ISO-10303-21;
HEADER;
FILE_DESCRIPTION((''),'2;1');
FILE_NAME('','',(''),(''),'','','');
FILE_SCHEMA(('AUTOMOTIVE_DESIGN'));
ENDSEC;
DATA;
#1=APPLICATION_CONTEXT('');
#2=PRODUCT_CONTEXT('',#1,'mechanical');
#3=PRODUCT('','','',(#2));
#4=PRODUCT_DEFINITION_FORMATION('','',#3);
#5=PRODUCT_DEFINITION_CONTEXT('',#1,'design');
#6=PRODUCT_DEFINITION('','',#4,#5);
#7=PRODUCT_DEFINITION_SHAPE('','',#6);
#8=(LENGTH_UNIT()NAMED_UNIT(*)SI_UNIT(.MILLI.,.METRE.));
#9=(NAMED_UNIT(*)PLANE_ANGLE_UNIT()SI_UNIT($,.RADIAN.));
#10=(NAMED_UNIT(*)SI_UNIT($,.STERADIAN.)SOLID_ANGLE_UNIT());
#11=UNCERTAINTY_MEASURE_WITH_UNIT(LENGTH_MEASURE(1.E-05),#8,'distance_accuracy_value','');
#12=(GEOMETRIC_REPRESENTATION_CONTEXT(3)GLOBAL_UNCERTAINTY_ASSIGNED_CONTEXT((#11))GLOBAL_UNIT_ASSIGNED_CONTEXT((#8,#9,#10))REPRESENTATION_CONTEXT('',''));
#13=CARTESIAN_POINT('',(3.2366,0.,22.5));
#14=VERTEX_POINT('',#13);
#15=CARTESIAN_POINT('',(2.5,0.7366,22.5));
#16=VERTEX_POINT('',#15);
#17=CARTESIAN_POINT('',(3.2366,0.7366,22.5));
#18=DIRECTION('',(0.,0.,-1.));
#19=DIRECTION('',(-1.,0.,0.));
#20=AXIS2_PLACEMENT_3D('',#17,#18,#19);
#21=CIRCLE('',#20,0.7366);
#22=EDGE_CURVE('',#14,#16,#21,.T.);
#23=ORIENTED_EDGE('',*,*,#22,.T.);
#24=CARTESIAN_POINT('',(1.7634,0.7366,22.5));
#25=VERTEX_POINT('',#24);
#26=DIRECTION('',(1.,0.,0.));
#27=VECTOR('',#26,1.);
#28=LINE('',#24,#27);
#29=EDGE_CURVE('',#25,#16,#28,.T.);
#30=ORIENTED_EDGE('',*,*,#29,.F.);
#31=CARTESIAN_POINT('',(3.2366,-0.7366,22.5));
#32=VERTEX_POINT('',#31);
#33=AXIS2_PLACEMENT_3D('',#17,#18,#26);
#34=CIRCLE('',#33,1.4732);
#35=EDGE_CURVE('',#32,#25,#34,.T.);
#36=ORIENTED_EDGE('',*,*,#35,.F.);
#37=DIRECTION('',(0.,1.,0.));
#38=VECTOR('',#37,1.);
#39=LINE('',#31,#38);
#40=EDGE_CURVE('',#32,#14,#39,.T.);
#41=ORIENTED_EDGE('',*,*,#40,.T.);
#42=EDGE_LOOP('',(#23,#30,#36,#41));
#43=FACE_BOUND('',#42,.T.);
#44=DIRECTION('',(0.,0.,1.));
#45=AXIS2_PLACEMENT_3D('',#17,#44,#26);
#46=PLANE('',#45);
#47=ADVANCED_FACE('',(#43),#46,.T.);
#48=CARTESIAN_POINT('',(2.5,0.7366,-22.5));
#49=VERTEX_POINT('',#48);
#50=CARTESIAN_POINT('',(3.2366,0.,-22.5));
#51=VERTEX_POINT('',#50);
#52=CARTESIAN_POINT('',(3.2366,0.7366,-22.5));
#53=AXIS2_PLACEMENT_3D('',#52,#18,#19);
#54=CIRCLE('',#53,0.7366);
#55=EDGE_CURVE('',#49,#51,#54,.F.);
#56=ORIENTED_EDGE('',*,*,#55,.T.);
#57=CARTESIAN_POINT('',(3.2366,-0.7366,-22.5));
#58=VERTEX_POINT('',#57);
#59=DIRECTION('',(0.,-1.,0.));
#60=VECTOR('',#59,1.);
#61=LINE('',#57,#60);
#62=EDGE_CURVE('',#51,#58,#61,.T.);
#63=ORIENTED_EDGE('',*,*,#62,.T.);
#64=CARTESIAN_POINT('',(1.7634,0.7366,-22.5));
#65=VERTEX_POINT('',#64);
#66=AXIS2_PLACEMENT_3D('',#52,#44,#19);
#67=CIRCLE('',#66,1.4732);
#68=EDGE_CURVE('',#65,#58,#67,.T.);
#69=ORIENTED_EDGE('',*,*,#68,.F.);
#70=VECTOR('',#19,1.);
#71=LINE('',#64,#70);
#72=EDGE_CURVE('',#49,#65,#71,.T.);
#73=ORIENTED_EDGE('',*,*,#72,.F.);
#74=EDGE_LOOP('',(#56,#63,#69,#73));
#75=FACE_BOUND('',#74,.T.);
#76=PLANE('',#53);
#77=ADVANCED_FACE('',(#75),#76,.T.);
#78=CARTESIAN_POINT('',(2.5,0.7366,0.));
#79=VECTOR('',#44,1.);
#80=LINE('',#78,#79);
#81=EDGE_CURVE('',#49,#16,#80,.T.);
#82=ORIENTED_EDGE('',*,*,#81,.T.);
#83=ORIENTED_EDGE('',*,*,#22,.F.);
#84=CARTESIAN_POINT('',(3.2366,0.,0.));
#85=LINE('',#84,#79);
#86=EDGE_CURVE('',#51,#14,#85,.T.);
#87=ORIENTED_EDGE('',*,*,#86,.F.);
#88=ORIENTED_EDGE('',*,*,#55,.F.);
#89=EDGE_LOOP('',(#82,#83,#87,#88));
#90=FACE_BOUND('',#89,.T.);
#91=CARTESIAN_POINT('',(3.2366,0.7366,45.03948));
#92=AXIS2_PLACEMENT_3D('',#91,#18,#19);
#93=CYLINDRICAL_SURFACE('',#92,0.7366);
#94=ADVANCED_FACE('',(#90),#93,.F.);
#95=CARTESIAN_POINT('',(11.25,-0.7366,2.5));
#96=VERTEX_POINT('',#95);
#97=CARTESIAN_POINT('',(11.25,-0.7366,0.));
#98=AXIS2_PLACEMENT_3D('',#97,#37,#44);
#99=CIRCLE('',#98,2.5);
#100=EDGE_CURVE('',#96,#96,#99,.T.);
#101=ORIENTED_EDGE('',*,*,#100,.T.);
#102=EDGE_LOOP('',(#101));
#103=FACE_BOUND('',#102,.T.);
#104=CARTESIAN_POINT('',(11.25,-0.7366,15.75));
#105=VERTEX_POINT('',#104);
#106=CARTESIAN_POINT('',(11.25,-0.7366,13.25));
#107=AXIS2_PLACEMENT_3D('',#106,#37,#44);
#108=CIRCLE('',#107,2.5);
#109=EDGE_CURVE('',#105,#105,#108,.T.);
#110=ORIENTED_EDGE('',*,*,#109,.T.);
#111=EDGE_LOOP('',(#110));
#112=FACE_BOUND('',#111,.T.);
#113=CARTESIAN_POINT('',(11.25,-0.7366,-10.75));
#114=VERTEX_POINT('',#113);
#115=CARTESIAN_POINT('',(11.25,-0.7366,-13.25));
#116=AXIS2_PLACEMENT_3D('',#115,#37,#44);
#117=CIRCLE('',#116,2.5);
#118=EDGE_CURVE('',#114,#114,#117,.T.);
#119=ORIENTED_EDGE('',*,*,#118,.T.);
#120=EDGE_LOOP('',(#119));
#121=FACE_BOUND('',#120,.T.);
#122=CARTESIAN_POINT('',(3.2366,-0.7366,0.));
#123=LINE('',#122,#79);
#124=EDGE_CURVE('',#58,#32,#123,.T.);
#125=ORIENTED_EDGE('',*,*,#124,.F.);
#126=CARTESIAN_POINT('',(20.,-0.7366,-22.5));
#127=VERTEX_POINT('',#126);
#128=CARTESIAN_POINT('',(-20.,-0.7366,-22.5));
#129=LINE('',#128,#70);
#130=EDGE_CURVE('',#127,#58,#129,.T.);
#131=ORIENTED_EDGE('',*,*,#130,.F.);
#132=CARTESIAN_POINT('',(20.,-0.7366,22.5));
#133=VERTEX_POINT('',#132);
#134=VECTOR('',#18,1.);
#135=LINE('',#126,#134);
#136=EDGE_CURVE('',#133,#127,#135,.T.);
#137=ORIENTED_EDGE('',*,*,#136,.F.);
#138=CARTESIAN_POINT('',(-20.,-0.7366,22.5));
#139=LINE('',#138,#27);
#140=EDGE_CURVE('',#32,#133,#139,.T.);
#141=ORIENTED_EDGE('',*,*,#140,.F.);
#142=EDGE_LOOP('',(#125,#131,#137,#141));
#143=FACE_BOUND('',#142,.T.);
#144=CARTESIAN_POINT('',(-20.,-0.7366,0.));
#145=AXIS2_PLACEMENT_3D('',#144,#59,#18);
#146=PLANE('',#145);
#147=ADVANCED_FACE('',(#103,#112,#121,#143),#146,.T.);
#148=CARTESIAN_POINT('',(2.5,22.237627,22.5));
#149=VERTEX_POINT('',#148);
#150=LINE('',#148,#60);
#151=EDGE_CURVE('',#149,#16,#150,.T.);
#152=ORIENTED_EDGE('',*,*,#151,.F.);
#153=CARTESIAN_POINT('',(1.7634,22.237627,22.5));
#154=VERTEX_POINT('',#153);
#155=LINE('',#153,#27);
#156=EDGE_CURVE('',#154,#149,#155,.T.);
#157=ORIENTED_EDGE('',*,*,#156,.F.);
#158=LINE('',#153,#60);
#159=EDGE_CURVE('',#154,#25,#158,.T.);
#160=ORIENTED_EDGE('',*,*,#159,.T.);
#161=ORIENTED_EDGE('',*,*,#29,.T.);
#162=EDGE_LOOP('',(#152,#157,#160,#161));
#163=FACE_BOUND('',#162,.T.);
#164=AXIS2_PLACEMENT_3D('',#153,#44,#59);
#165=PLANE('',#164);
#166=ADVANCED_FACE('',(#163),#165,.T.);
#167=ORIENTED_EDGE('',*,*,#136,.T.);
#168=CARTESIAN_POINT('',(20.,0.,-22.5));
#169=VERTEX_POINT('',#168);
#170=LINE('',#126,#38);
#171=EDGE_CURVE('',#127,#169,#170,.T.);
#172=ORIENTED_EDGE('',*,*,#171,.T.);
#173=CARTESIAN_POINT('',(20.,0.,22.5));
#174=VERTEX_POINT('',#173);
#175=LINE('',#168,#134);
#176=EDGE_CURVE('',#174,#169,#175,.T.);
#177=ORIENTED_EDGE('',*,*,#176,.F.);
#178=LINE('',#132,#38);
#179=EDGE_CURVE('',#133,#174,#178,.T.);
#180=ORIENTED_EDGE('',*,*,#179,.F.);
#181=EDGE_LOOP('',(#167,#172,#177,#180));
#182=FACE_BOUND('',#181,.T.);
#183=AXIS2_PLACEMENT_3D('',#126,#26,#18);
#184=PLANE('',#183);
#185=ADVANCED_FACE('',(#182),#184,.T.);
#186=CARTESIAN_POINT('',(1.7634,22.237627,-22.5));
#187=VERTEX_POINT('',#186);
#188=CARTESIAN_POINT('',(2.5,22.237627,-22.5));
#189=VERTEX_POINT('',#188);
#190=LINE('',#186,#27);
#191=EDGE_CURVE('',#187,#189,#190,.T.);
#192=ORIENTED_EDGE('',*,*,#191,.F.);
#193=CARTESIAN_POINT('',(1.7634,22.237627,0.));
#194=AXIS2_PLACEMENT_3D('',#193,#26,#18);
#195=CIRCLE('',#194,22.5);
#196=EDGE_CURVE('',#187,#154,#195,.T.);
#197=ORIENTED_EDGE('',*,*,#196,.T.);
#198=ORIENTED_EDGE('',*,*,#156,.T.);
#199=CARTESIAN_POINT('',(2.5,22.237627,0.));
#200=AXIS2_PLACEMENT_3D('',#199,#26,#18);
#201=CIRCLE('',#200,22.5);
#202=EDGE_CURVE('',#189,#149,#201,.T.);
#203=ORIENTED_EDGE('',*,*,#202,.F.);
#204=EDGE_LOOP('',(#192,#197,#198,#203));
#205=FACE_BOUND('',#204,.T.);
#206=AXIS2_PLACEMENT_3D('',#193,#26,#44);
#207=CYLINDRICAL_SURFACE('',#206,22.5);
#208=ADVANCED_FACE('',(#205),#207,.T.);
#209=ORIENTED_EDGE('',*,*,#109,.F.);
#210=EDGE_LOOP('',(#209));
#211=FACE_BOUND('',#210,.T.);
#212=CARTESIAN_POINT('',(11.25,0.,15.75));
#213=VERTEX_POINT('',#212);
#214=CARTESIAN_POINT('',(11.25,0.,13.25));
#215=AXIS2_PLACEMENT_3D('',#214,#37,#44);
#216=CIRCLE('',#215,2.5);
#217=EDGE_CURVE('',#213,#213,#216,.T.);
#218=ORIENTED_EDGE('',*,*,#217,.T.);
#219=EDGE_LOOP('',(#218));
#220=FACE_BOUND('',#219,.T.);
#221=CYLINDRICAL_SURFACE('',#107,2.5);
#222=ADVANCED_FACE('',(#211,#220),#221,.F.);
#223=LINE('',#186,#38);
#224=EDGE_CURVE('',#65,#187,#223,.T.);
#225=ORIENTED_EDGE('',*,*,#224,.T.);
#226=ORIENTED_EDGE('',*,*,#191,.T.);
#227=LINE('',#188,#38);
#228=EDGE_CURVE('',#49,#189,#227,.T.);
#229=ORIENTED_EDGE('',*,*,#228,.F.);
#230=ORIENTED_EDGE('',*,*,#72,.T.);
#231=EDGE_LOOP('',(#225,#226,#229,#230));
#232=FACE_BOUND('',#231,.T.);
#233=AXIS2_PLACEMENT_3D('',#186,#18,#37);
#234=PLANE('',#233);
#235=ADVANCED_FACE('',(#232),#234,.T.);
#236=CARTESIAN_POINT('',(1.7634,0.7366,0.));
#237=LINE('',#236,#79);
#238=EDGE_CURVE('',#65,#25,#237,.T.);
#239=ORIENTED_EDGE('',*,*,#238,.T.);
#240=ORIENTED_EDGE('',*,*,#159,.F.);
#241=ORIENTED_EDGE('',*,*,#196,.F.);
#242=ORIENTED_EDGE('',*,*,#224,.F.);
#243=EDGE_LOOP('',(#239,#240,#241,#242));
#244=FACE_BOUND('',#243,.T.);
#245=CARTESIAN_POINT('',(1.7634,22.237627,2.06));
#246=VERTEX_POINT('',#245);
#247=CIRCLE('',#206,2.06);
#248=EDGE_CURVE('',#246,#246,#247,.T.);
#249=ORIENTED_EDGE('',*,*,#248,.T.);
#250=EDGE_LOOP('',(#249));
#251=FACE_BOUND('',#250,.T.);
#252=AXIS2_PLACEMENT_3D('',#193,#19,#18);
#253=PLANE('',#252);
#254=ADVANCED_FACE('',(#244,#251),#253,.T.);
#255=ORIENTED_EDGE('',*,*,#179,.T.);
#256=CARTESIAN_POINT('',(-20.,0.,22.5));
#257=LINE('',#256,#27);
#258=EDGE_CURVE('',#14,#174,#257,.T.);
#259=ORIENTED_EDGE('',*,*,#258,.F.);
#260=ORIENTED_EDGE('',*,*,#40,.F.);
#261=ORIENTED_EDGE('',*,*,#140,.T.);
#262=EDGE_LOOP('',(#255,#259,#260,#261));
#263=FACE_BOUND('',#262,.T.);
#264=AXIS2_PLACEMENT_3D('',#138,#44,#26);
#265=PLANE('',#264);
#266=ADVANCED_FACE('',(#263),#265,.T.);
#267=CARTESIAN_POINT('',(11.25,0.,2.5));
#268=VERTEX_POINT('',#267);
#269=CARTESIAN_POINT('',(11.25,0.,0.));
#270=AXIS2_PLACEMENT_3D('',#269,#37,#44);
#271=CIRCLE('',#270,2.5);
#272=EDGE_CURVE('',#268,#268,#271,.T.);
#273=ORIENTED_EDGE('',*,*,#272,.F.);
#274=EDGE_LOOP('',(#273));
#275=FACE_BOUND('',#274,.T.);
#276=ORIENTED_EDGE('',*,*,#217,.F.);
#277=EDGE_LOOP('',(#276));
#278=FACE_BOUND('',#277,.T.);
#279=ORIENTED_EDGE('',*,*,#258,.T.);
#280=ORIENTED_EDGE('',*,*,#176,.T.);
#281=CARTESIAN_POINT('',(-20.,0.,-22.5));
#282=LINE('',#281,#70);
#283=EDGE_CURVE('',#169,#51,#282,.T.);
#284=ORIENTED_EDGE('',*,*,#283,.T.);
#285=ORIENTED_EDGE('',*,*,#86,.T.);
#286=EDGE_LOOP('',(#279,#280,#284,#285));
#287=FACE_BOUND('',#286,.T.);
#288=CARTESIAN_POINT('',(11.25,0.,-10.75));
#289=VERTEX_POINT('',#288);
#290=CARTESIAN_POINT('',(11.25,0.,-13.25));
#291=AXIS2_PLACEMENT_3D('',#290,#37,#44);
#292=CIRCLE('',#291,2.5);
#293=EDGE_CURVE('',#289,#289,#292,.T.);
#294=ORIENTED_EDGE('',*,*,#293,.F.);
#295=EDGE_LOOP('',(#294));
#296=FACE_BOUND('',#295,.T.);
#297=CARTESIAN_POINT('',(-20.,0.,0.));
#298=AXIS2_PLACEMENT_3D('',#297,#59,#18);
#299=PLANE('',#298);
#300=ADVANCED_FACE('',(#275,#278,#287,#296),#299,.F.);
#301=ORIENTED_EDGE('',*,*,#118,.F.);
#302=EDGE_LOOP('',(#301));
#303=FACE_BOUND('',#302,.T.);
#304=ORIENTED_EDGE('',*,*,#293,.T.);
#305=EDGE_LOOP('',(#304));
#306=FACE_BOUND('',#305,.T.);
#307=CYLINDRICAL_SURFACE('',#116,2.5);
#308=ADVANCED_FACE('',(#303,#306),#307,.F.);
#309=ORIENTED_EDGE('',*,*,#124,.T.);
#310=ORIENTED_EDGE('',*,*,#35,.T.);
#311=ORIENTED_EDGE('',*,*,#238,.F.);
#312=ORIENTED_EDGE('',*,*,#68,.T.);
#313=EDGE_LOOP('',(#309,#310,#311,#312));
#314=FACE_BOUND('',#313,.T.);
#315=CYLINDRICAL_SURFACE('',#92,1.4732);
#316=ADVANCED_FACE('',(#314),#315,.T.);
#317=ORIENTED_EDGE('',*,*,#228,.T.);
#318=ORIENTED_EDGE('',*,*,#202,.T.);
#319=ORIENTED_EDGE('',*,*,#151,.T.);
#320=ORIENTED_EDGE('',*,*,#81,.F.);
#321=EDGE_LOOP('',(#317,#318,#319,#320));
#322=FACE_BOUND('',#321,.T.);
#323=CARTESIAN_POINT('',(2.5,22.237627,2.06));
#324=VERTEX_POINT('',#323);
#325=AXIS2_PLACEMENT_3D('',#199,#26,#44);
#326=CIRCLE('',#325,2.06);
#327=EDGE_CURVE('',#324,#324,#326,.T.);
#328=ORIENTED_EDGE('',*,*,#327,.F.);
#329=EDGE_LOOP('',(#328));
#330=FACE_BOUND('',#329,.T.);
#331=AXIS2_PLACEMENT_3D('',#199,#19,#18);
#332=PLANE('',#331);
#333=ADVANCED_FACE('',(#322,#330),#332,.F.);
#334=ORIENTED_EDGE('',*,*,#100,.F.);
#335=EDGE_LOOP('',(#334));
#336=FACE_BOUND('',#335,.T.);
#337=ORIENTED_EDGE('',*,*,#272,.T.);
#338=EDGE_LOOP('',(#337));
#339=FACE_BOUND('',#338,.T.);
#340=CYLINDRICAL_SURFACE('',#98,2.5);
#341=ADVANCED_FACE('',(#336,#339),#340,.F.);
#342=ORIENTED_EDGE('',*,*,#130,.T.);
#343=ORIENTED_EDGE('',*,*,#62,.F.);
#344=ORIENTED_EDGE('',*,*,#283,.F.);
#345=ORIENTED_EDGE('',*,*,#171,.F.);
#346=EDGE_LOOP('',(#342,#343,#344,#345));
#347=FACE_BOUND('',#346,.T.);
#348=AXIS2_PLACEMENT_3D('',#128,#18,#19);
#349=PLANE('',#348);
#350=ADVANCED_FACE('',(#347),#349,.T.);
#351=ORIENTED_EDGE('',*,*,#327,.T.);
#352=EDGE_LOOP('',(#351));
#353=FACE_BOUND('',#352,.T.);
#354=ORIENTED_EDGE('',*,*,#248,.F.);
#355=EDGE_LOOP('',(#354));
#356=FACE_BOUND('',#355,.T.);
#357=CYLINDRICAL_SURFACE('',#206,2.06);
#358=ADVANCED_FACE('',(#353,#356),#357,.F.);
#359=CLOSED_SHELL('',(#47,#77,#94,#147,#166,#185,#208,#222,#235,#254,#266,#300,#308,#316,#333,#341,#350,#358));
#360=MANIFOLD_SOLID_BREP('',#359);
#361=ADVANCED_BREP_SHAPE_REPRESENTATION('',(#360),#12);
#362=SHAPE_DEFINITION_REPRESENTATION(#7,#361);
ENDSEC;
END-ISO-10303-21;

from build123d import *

# Parameters (mm, degrees)
SKETCH1_R                  = 2.5
SKETCH1_R_2                = 2.06
BASE_FLANGE3_DEPTH         = 0.7366
SKETCHED_START             = -43
SKETCHED_BEND1_OUTLINE_W   = 0.7366
SKETCHED_BEND1_OUTLINE_H   = 45
SKETCHED_BEND1_DEPTH       = 44.914756568
SKETCHED_START_2           = 2.495963432
SKETCHED_BEND1_2_OUTLINE_R = 2.06
SKETCHED_BEND1_2_DEPTH     = 0.004036568
SKETCHED_START_3           = 1.7634
SKETCHED_BEND1_3_OUTLINE_R = 2.06
SKETCHED_BEND1_3_DEPTH     = 1.4732
SKETCHED_START_4           = -23
SKETCHED_BEND1_4_DEPTH     = 46


with BuildPart() as part:
    # Base-Flange3: sheet metal written as solids
    # Sketch1 → Base-Flange3 (new body)
    with BuildSketch(Plane(origin=(0, 0, 0), x_dir=(1, 0, 0), z_dir=(0, 1, 0))):
        with BuildLine():
            Line((-20, 22.5), (20, 22.5))
            Line((20, 22.5), (20, -22.5))
            Line((20, -22.5), (-20, -22.5))
            ThreePointArc((-20, -22.5), (-42.5, 0), (-20, 22.5))
        make_face()
        with Locations(Location((11.25, -13.25, 0), (0, 0, 270))):
            Circle(SKETCH1_R, mode=Mode.SUBTRACT)
        with Locations(Location((11.25, 13.25, 0), (0, 0, 270))):
            Circle(SKETCH1_R, mode=Mode.SUBTRACT)
        with Locations(Location((11.25, 0, 0), (0, 0, 270))):
            Circle(SKETCH1_R, mode=Mode.SUBTRACT)
        with Locations(Location((-20, 0, 0), (0, 0, 270))):
            Circle(SKETCH1_R_2, mode=Mode.SUBTRACT)
    extrude(amount=-BASE_FLANGE3_DEPTH)

    # Sketched Bend1: read off the stored shape, not the designer's step
    # Sketched Bend1 outline → Sketched Bend1 (cut)
    with BuildSketch(Plane.YZ.offset(SKETCHED_START)):
        with Locations((-0.3683, 0)):
            Rectangle(SKETCHED_BEND1_OUTLINE_W, SKETCHED_BEND1_OUTLINE_H)
    extrude(amount=SKETCHED_BEND1_DEPTH, mode=Mode.SUBTRACT)

    # Sketched Bend1 2 outline → Sketched Bend1 2 (add)
    with BuildSketch(Plane.YZ.offset(SKETCHED_START_2)):
        with BuildLine():
            ThreePointArc((22.237627139, -22.5), (44.737627139, 0), (22.237627139, 22.5))
            Line((22.237627139, 22.5), (0, 22.5))
            Line((0, 22.5), (0, -22.5))
            Line((0, -22.5), (22.237627139, -22.5))
        make_face()
        with Locations((22.237627139, 0)):
            Circle(SKETCHED_BEND1_2_OUTLINE_R, mode=Mode.SUBTRACT)
    extrude(amount=SKETCHED_BEND1_2_DEPTH)

    # Sketched Bend1 3 outline → Sketched Bend1 3 (add)
    with BuildSketch(Plane.YZ.offset(SKETCHED_START_3)):
        with BuildLine():
            ThreePointArc((22.237627139, -22.5), (44.737627139, 0), (22.237627139, 22.5))
            Line((22.237627139, 22.5), (0, 22.5))
            Line((0, 22.5), (0, -22.5))
            Line((0, -22.5), (22.237627139, -22.5))
        make_face()
        with Locations((22.237627139, 0)):
            Circle(SKETCHED_BEND1_3_OUTLINE_R, mode=Mode.SUBTRACT)
    extrude(amount=SKETCHED_BEND1_3_DEPTH)

    # Sketched Bend1 4 outline → Sketched Bend1 4 (cut)
    with BuildSketch(Plane.XY.offset(SKETCHED_START_4)):
        with BuildLine():
            Line((2.5, 46), (2.5, 0.7366))
            ThreePointArc((2.5, 0.7366), (2.715745145, 0.215745145), (3.2366, 0))
            Line((3.2366, 0), (3.2366, 46))
            Line((3.2366, 46), (2.5, 46))
        make_face()
        with BuildLine():
            Line((1.7634, 0.7366), (1.763399995, 46))
            Line((1.763399995, 46), (0, 46))
            Line((0, 46), (0, 0))
            Line((0, 0), (1.914756568, 0))
            Line((1.914756568, 0), (1.914756568, -2))
            Line((1.914756568, -2), (5, -2))
            Line((5, -2), (5, -0.7366))
            Line((5, -0.7366), (3.2366, -0.7366))
            ThreePointArc((3.2366, -0.7366), (2.19489029, -0.30510971), (1.7634, 0.7366))
        make_face()
    extrude(amount=SKETCHED_BEND1_4_DEPTH, mode=Mode.SUBTRACT)


solid = part.part
